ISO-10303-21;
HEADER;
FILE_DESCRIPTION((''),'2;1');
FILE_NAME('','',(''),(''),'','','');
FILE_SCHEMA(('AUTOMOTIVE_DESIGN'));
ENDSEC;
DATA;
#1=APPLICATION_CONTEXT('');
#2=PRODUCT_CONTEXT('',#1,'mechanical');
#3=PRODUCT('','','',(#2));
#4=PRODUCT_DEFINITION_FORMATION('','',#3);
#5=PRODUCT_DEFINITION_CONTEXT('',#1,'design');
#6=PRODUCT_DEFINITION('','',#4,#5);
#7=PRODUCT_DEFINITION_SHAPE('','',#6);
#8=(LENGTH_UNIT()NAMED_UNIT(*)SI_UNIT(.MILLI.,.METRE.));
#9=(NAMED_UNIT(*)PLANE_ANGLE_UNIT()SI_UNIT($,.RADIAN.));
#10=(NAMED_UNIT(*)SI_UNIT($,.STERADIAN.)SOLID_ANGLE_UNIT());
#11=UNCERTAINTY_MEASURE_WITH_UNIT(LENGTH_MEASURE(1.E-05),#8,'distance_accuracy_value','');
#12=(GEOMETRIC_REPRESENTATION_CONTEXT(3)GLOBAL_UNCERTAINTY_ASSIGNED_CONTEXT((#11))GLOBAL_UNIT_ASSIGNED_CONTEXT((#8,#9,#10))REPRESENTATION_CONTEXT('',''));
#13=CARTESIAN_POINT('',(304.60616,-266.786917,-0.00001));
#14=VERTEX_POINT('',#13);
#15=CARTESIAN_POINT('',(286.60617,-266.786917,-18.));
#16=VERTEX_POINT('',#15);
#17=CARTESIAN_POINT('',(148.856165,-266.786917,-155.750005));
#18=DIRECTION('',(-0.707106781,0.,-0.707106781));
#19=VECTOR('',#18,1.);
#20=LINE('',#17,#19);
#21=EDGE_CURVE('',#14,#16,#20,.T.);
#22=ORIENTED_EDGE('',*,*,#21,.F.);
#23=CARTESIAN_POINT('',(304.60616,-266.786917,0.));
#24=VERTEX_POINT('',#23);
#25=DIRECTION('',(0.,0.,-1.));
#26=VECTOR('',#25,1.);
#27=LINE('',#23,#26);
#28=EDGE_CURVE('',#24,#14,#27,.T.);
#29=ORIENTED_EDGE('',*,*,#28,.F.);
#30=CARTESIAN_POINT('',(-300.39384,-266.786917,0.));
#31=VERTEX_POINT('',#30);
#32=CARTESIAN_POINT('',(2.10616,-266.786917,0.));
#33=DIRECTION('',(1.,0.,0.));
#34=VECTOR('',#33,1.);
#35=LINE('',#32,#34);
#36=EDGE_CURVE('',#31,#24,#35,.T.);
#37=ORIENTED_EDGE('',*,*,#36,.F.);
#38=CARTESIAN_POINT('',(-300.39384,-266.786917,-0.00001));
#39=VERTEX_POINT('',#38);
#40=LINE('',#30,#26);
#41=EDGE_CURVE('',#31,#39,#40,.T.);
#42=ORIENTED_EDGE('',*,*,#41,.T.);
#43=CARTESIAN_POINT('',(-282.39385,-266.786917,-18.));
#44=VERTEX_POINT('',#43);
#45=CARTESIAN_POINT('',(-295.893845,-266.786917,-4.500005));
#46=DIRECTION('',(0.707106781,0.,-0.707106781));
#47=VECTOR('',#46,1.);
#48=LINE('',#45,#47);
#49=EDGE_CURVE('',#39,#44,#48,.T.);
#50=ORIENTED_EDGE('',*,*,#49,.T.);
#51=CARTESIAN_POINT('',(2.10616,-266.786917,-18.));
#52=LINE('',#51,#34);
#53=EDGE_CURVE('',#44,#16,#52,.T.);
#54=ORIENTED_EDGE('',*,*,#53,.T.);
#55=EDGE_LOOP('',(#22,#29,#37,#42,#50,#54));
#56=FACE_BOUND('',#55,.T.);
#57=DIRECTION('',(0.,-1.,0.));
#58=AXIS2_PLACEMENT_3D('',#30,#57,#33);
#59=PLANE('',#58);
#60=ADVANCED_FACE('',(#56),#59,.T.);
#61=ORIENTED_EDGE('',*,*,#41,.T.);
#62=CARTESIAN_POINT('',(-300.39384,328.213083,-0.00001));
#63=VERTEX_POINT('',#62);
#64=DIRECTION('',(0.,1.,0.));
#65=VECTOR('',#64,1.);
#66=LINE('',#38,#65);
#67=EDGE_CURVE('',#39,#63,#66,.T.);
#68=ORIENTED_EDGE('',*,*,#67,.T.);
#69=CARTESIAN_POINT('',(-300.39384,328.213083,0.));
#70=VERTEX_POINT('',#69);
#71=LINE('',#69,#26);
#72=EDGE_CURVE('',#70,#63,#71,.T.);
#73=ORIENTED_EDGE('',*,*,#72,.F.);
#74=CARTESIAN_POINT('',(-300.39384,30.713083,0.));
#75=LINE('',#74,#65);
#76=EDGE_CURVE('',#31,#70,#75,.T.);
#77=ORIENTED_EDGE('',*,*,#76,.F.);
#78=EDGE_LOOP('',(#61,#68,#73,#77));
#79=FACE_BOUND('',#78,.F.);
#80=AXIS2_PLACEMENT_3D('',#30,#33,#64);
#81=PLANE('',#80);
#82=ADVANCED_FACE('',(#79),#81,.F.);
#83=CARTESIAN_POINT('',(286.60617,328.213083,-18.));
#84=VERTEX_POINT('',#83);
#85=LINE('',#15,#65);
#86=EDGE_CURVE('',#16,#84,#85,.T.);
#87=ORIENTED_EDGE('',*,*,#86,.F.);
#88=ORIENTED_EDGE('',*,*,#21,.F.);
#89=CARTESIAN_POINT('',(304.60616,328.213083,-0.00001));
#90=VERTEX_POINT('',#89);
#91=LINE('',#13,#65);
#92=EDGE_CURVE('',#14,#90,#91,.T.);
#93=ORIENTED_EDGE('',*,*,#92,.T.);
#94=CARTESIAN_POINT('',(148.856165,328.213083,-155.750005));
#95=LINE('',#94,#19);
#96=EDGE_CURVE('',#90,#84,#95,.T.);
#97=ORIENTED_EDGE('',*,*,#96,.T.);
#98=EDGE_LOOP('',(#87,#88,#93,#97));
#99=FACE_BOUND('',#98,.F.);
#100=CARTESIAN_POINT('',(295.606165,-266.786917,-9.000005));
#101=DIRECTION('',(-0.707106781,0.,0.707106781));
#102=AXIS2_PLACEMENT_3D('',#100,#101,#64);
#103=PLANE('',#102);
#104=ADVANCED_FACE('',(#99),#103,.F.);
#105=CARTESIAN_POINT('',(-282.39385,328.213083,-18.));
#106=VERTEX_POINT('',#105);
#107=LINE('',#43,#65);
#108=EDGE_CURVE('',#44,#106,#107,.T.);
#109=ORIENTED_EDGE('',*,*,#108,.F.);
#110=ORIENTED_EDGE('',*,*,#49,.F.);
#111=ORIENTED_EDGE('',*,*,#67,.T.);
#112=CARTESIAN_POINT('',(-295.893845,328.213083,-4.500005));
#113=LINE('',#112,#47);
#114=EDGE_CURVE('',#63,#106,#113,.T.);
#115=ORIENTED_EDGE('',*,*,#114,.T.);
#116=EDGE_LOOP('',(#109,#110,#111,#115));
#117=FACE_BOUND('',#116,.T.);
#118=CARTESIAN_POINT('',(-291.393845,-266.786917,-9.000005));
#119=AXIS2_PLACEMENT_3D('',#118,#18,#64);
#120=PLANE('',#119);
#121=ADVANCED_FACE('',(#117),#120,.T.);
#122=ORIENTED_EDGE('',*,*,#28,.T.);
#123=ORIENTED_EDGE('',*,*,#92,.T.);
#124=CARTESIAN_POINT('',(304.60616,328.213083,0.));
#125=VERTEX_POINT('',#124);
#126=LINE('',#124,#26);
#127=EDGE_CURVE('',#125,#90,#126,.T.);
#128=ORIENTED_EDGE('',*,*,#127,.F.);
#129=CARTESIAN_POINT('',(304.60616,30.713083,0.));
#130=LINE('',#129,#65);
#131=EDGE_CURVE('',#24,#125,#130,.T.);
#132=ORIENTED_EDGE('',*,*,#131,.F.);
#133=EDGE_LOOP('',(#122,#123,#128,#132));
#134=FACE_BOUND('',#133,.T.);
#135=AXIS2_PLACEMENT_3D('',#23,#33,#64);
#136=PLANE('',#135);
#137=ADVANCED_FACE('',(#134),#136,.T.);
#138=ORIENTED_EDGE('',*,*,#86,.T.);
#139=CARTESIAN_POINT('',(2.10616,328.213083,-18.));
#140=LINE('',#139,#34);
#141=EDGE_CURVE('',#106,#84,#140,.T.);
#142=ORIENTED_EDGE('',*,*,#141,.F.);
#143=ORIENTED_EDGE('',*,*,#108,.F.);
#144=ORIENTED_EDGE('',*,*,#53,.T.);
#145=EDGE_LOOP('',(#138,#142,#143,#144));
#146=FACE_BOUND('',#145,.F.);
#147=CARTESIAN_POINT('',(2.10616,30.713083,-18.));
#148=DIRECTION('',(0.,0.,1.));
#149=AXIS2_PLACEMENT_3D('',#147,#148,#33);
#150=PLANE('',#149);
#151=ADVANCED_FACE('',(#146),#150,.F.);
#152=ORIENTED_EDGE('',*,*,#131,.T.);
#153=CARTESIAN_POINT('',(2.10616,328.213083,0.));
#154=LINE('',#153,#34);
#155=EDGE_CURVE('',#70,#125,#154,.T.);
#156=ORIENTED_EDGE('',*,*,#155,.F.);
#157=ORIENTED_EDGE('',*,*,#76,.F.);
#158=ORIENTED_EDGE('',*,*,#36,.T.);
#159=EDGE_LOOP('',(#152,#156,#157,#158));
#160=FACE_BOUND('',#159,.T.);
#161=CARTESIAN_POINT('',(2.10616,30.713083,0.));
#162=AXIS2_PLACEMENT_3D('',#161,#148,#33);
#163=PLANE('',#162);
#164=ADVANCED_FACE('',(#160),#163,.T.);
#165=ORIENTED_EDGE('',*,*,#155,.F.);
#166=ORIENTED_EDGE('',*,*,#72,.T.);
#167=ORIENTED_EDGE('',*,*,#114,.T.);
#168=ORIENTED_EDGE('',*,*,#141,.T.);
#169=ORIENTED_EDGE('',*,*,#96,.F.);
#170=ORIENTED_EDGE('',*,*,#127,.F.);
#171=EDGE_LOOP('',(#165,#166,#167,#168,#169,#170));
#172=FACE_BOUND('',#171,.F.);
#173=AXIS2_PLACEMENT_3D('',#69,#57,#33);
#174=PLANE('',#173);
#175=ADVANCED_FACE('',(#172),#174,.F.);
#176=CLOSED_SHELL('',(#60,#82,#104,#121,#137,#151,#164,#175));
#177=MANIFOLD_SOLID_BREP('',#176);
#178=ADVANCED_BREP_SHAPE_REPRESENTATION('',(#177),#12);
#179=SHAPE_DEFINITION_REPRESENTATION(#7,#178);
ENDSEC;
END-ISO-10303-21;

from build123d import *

# Parameters (mm, degrees)
F0_W     = 605
F0_H     = 595
F1_DEPTH = 18
F2_SIZE  = 17.99999


# Not quite as in the source:
# - a fillet or chamfer is up to 0.001 mm smaller than in the source, because OpenCascade refuses the exact size


with BuildPart() as f1:
    # F0 (on Top) → F1 (new body)
    with BuildSketch(Plane.XY):
        with Locations((2.1061599255, 30.7130831559)):
            Rectangle(F0_W, F0_H)
    extrude(amount=-F1_DEPTH)

    # F2 (size 18 in the source; OpenCascade refuses exactly that, so slightly less here)
    f2_edges = [f1.edges().sort_by_distance(p)[0] for p in [
        (-300.39384, 30.713083, -18),
        (304.60616, 30.713083, -18),
    ]]
    chamfer(f2_edges, length=F2_SIZE)


solid = f1.part
